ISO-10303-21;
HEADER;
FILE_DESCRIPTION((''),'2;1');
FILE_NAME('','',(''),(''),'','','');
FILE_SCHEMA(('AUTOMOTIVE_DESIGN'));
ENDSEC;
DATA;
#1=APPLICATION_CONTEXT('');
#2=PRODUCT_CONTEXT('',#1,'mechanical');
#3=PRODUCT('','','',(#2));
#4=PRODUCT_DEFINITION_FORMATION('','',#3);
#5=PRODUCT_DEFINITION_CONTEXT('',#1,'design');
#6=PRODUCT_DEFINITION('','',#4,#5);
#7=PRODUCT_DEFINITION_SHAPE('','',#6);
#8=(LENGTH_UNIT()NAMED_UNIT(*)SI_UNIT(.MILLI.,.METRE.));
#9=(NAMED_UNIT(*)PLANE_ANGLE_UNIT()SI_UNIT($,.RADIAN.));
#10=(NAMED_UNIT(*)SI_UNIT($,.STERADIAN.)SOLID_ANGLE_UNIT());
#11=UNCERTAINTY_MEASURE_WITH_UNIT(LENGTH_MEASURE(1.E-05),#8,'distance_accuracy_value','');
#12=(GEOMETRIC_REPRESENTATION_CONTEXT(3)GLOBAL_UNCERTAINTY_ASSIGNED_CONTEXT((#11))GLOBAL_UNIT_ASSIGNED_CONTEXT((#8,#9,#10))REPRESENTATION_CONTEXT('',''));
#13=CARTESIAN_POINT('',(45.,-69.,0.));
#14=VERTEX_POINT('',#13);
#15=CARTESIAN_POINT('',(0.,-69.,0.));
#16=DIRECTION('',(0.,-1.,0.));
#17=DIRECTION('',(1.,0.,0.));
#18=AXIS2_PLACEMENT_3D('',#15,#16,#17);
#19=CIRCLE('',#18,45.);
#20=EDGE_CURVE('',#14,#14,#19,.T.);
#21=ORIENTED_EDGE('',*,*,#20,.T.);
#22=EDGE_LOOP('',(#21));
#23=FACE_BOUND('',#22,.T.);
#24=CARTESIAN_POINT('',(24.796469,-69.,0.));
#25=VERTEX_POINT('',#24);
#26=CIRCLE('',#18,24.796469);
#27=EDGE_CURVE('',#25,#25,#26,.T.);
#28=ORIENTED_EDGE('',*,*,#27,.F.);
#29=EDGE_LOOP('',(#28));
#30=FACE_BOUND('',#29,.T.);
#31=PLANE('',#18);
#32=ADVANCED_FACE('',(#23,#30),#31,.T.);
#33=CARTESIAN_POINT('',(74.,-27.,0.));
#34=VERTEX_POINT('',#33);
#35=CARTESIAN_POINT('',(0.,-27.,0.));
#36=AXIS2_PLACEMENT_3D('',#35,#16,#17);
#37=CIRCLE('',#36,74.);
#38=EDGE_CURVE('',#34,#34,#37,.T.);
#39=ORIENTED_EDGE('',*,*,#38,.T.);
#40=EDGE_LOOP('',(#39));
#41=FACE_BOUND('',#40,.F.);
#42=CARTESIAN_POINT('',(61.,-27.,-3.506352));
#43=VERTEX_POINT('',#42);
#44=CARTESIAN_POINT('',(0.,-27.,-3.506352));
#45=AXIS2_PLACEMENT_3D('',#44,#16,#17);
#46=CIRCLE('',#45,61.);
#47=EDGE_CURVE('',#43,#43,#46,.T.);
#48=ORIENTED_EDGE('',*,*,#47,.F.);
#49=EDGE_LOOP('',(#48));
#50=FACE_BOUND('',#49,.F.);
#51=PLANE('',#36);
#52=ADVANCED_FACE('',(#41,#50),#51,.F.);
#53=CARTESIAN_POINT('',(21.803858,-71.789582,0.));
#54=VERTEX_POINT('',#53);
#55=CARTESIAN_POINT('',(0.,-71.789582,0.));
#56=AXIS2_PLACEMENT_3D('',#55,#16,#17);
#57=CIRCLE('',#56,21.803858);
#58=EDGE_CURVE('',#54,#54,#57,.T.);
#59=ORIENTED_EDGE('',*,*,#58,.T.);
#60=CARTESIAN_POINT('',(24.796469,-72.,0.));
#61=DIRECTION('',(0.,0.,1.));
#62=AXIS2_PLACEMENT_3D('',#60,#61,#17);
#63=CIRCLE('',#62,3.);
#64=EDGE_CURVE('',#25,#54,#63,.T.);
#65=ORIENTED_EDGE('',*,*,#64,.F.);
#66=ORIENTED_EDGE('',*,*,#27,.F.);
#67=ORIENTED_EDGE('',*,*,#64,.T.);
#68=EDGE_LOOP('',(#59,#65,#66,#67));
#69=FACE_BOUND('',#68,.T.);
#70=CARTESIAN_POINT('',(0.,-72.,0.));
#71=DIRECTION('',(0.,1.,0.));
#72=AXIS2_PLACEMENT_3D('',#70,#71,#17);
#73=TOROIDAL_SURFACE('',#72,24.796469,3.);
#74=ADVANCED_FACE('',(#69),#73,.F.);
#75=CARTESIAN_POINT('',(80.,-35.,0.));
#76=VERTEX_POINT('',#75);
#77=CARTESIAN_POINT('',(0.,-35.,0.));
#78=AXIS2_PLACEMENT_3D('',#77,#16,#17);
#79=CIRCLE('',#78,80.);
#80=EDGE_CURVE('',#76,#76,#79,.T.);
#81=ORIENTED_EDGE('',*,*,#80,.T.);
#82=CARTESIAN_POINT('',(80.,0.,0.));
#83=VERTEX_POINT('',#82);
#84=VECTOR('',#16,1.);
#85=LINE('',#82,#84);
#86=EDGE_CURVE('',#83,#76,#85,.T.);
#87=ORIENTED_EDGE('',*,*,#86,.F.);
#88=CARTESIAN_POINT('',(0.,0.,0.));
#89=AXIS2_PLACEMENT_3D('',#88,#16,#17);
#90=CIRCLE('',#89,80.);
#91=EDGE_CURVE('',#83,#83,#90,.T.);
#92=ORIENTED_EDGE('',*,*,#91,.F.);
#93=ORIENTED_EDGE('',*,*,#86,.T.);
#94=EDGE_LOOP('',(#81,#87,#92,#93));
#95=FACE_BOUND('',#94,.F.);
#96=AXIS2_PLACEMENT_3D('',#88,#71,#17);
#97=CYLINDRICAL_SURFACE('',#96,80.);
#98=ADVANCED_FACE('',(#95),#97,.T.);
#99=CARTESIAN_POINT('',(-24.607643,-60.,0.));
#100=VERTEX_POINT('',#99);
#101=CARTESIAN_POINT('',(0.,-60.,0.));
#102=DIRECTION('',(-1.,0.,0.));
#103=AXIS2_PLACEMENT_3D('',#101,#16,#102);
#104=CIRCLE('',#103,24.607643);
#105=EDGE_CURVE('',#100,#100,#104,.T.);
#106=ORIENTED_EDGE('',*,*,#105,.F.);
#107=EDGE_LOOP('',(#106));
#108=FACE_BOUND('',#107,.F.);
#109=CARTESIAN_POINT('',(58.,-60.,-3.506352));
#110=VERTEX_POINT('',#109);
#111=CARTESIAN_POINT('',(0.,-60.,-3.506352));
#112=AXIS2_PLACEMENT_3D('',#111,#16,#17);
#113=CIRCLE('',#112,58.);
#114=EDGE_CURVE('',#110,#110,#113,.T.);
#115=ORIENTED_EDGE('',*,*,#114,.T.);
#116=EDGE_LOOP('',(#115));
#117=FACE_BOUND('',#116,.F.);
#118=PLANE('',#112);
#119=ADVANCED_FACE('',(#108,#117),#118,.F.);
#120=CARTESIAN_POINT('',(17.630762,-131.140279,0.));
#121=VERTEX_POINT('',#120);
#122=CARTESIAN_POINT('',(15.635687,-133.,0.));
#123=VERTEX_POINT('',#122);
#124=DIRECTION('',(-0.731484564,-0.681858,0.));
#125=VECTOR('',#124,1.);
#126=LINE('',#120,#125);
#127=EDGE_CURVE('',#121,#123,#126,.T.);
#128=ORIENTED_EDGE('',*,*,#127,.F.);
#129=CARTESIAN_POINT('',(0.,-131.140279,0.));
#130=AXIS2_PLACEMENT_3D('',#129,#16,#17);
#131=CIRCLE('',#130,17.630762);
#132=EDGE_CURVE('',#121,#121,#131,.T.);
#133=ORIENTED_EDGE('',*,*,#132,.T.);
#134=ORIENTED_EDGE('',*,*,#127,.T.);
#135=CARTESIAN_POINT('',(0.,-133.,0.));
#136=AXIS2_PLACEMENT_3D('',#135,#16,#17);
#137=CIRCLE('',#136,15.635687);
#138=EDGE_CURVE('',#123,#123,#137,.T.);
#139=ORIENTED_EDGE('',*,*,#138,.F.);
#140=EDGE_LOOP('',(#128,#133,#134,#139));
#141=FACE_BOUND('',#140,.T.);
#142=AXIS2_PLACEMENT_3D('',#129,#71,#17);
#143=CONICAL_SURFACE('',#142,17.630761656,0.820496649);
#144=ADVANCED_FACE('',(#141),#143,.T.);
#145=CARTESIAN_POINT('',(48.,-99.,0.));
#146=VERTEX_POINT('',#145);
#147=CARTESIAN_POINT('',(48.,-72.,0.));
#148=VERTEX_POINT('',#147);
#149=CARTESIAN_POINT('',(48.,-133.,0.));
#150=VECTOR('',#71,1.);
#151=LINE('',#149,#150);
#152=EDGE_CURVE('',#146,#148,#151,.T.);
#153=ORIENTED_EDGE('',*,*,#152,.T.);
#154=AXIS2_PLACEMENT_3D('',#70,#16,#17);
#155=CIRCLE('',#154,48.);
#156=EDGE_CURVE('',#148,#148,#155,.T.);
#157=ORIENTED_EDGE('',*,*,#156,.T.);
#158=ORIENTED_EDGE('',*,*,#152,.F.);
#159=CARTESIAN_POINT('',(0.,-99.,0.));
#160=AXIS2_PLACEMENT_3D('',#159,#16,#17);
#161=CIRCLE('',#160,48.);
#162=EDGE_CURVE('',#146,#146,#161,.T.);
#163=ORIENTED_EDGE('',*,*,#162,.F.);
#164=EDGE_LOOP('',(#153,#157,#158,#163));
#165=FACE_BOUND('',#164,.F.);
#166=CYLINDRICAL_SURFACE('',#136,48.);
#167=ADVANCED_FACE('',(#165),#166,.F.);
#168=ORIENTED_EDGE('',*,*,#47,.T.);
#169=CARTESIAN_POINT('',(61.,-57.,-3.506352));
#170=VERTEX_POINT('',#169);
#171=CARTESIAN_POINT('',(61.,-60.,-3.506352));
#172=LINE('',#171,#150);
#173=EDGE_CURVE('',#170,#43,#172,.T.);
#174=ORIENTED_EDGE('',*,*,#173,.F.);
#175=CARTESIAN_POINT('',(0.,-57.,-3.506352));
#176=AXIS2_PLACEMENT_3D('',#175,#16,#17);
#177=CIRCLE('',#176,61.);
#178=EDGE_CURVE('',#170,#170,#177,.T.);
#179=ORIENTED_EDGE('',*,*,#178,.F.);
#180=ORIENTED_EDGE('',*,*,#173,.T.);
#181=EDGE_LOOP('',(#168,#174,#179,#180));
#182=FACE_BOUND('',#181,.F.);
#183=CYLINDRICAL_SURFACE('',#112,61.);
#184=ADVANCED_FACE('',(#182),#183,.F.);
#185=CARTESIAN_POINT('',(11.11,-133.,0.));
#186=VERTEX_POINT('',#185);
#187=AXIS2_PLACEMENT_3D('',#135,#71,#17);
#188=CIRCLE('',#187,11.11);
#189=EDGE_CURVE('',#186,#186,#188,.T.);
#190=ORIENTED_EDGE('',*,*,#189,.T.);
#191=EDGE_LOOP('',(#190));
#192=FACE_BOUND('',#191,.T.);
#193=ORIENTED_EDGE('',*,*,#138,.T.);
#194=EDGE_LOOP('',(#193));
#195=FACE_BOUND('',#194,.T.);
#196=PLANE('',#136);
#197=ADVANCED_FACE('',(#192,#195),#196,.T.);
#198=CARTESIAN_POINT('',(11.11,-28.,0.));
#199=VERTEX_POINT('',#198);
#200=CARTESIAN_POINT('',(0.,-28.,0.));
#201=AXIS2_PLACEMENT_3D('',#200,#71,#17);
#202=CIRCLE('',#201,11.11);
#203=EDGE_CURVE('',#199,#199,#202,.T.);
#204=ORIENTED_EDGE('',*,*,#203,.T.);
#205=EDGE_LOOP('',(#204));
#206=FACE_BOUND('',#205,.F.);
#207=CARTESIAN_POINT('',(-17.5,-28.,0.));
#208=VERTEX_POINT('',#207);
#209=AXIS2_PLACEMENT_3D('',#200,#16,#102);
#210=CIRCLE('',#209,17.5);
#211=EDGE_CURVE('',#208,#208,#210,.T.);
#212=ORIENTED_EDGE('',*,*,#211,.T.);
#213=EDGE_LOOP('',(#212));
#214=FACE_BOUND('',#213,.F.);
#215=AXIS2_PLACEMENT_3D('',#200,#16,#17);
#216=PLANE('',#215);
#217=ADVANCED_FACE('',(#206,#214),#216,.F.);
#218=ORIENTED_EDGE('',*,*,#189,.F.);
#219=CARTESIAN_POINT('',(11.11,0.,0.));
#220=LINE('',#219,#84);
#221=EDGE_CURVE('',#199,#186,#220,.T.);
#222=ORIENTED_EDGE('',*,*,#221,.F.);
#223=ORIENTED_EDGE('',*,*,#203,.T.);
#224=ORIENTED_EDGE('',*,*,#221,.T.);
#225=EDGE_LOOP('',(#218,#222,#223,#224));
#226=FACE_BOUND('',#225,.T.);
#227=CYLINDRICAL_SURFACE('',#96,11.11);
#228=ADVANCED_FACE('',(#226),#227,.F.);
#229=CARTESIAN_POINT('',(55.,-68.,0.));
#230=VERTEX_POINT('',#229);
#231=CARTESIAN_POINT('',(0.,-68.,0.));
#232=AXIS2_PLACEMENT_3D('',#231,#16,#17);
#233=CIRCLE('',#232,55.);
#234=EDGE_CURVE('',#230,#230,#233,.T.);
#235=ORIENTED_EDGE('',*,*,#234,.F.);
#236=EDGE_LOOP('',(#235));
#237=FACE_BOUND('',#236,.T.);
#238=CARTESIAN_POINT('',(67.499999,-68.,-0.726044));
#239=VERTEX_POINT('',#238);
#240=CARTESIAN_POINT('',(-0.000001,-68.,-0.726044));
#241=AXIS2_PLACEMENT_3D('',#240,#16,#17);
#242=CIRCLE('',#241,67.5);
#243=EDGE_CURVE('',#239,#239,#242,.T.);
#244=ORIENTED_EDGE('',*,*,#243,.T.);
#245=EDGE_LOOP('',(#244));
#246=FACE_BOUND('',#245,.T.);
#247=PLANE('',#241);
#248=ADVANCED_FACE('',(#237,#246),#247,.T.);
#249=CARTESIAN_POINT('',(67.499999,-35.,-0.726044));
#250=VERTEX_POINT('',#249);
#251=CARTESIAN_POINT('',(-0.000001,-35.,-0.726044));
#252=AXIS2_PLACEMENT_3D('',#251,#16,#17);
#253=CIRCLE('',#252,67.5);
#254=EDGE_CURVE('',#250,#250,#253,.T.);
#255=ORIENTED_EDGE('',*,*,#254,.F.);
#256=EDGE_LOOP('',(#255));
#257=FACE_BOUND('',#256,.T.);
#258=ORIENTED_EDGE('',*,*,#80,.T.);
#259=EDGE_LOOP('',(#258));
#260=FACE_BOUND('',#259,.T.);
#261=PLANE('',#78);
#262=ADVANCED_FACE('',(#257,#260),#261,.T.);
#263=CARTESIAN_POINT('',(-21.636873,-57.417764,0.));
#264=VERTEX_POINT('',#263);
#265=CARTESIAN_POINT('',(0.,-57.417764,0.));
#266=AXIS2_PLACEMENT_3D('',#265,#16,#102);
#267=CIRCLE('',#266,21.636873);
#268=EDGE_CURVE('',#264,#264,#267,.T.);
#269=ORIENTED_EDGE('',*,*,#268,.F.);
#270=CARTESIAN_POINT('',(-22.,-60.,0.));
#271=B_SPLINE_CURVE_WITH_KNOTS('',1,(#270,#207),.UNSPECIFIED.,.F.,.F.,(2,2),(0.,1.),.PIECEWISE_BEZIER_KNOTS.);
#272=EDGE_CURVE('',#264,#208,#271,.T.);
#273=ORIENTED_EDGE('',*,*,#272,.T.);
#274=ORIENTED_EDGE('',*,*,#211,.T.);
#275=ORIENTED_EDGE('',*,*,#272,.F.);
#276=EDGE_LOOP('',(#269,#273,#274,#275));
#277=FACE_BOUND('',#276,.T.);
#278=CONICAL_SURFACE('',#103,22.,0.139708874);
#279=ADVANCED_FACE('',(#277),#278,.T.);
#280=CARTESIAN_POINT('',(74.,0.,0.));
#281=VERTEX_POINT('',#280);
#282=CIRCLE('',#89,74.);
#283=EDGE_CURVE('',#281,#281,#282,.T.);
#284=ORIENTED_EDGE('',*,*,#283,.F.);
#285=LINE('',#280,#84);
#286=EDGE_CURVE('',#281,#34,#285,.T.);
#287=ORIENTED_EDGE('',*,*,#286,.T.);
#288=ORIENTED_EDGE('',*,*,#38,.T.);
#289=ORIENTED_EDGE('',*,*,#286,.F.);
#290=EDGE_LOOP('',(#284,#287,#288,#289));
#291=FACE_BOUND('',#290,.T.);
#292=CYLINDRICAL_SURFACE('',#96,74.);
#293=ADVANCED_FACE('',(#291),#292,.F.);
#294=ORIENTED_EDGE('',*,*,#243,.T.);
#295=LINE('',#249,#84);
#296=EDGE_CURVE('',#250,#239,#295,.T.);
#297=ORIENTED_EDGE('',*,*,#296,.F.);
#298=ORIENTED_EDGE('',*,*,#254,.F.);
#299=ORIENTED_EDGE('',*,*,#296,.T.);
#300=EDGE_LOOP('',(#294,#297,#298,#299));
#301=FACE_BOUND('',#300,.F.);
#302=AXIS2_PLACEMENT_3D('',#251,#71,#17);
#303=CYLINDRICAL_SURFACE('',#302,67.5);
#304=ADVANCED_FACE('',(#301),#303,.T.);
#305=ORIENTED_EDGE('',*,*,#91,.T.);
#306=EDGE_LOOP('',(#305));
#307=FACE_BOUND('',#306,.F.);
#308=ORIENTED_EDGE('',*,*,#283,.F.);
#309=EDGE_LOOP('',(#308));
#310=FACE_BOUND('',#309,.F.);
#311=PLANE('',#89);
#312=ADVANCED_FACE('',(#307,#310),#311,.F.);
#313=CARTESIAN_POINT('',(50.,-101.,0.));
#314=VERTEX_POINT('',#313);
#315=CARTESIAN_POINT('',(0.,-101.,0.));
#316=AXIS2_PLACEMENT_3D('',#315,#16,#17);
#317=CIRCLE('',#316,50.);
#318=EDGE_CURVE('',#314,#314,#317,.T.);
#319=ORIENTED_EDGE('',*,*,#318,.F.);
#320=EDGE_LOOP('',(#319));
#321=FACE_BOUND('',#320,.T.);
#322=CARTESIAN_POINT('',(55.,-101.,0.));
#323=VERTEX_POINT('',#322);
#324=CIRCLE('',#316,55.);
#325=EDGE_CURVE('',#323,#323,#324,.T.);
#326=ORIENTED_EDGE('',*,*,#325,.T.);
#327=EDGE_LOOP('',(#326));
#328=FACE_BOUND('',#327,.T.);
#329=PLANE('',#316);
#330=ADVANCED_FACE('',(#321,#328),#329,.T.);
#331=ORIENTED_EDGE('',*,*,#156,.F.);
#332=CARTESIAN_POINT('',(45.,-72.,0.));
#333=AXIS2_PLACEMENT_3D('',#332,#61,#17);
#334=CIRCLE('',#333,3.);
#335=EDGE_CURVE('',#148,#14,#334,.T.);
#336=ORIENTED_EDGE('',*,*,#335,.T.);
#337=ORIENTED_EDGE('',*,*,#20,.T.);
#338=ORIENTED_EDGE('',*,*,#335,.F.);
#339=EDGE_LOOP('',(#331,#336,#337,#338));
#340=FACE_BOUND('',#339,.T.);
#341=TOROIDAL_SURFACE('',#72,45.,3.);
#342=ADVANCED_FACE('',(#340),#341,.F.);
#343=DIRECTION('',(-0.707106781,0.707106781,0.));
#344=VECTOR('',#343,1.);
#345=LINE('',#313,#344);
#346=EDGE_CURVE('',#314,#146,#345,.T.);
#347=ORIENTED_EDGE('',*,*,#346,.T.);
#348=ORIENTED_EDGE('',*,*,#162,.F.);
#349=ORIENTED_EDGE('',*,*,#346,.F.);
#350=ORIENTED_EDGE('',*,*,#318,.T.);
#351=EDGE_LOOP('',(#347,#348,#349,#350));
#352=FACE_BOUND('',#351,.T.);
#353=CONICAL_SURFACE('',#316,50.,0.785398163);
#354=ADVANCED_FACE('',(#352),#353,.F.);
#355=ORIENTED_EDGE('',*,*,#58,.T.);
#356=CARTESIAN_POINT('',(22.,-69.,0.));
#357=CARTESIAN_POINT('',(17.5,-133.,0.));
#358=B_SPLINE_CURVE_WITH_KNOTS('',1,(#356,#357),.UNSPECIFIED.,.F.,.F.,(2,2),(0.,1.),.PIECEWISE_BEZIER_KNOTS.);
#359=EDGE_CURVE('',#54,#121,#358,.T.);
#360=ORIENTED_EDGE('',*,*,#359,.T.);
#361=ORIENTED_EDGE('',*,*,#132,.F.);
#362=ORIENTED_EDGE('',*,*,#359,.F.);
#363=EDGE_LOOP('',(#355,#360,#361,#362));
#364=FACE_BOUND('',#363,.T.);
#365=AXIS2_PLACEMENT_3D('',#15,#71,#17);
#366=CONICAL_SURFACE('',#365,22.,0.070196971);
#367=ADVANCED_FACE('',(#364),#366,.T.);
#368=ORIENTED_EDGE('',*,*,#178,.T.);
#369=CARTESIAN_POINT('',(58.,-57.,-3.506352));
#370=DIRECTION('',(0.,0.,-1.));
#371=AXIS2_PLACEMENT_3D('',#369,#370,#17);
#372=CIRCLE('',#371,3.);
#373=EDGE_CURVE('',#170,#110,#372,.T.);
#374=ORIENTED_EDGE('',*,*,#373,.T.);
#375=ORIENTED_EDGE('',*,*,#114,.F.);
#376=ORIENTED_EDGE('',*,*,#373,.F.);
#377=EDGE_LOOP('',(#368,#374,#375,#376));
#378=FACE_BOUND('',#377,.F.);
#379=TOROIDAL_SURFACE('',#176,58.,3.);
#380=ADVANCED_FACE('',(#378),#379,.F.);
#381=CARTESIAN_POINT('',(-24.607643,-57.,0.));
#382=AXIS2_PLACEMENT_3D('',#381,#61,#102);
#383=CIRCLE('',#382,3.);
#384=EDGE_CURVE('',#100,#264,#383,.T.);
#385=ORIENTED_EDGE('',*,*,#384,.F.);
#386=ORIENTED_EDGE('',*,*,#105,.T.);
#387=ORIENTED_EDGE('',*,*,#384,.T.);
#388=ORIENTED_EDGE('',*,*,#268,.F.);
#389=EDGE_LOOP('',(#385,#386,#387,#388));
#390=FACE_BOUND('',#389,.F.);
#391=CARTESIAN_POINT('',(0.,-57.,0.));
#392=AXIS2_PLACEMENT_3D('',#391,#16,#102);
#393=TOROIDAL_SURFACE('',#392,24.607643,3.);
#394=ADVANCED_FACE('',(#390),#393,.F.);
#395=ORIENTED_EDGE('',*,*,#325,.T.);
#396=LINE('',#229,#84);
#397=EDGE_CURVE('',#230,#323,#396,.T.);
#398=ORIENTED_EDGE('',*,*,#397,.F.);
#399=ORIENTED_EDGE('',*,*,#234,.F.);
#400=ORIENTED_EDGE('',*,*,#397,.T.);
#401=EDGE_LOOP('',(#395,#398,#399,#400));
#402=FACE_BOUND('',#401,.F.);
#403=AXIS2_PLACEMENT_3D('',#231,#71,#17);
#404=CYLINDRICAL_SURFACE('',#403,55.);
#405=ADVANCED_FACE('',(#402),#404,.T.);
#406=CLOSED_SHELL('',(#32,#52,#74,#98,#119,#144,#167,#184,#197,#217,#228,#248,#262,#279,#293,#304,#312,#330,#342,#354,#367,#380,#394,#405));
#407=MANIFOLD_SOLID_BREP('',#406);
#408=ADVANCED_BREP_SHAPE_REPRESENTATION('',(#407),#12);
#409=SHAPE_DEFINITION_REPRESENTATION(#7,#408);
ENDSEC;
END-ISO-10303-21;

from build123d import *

# Parameters (mm, degrees)
F3_R      = 80
F4_DEPTH  = 35
F5_R      = 67.5
F6_DEPTH  = 33
F7_R      = 55
F8_DEPTH  = 33
F9_R      = 48
F10_DEPTH = 64
F11_R     = 22
F12_R     = 17.5
F14_R     = 74
F15_DEPTH = 27
F16_R     = 61
F17_DEPTH = 60.001
F18_R     = 22
F19_R     = 17.5
F21_R     = 11.11
F22_DEPTH = 133.0010001
F24_R     = 3


# Not quite as in the source:
# - a fillet or chamfer that OpenCascade refuses, or shapes differently, is made with other operations: its cross-section is extruded or revolved along the edge and cut away or added


with BuildPart() as f4:
    # F3 (on Front) → F4 (new body)
    with BuildSketch(Plane.XZ):
        Circle(F3_R)
    extrude(amount=F4_DEPTH)

    # F5 (on face) → F6 (join)
    with BuildSketch(Plane.XZ.offset(35)):
        with Locations((-1.0126e-06, -0.7260435959)):
            Circle(F5_R)
    extrude(amount=F6_DEPTH)

    # F7 (on face) → F8 (join)
    with BuildSketch(Plane.XZ.offset(68)):
        Circle(F7_R)
    extrude(amount=F8_DEPTH)

    # F9 (on offset) → F10 (cut)
    with BuildSketch(Plane.XZ.offset(133)):
        Circle(F9_R)
    extrude(amount=-F10_DEPTH, mode=Mode.SUBTRACT)

    # F11 (on face) → F13 section 0
    with BuildSketch(Plane.XZ.offset(69)):
        Circle(F11_R)
    # F12 (on offset) → F13 section 1
    with BuildSketch(Plane.XZ.offset(133)):
        Circle(F12_R)
    loft()

    # F14 (on Front) → F15 (cut)
    with BuildSketch(Plane.XZ):
        Circle(F14_R)
    extrude(amount=F15_DEPTH, mode=Mode.SUBTRACT)

    # F16 (on offset) → F17 (cut, through all)
    with BuildSketch(Plane.XZ.offset(60)):
        with Locations((0, -3.5063521937)):
            Circle(F16_R)
    extrude(amount=-F17_DEPTH, mode=Mode.SUBTRACT)

    # F18 (on face) → F20 section 0
    with BuildSketch(Plane(origin=(0, -60, 0), x_dir=(-1, 0, 0), z_dir=(0, 1, 0))):
        Circle(F18_R)
    # F19 (on offset) → F20 section 1
    with BuildSketch(Plane.XZ.offset(28)):
        Circle(F19_R)
    loft()

    # F21 (on Front) → F22 (cut, through all)
    with BuildSketch(Plane.XZ):
        Circle(F21_R)
    extrude(amount=F22_DEPTH, mode=Mode.SUBTRACT)

    # F23: chamfer of 2 on 2 edges, made by hand

    # F23_s1 → F23_t2 (revolve, cut)
    with BuildSketch(Plane.XY):
        Polygon((50, -101), (48, -99), (48, -101), align=None)
    revolve(axis=Axis((0, -101, 0), (0, -1, 0)), mode=Mode.SUBTRACT)

    # F23_s3 → F23_t4 (revolve, cut)
    with BuildSketch(Plane.XY):
        Polygon((17.6307616561, -131.1402786693), (15.6356872477, -133), (17.5, -133), align=None)
    revolve(axis=Axis((0, -133, 0), (0, -1, 0)), mode=Mode.SUBTRACT)

    # F24
    f24_edges = [f4.edges().sort_by_distance(p)[0] for p in [
        (-22, -69, 0),
        (-48, -69, 0),
        (-61, -60, -3.506352),
        (22, -60, 0),
    ]]
    fillet(f24_edges, radius=F24_R)


solid = f4.part
